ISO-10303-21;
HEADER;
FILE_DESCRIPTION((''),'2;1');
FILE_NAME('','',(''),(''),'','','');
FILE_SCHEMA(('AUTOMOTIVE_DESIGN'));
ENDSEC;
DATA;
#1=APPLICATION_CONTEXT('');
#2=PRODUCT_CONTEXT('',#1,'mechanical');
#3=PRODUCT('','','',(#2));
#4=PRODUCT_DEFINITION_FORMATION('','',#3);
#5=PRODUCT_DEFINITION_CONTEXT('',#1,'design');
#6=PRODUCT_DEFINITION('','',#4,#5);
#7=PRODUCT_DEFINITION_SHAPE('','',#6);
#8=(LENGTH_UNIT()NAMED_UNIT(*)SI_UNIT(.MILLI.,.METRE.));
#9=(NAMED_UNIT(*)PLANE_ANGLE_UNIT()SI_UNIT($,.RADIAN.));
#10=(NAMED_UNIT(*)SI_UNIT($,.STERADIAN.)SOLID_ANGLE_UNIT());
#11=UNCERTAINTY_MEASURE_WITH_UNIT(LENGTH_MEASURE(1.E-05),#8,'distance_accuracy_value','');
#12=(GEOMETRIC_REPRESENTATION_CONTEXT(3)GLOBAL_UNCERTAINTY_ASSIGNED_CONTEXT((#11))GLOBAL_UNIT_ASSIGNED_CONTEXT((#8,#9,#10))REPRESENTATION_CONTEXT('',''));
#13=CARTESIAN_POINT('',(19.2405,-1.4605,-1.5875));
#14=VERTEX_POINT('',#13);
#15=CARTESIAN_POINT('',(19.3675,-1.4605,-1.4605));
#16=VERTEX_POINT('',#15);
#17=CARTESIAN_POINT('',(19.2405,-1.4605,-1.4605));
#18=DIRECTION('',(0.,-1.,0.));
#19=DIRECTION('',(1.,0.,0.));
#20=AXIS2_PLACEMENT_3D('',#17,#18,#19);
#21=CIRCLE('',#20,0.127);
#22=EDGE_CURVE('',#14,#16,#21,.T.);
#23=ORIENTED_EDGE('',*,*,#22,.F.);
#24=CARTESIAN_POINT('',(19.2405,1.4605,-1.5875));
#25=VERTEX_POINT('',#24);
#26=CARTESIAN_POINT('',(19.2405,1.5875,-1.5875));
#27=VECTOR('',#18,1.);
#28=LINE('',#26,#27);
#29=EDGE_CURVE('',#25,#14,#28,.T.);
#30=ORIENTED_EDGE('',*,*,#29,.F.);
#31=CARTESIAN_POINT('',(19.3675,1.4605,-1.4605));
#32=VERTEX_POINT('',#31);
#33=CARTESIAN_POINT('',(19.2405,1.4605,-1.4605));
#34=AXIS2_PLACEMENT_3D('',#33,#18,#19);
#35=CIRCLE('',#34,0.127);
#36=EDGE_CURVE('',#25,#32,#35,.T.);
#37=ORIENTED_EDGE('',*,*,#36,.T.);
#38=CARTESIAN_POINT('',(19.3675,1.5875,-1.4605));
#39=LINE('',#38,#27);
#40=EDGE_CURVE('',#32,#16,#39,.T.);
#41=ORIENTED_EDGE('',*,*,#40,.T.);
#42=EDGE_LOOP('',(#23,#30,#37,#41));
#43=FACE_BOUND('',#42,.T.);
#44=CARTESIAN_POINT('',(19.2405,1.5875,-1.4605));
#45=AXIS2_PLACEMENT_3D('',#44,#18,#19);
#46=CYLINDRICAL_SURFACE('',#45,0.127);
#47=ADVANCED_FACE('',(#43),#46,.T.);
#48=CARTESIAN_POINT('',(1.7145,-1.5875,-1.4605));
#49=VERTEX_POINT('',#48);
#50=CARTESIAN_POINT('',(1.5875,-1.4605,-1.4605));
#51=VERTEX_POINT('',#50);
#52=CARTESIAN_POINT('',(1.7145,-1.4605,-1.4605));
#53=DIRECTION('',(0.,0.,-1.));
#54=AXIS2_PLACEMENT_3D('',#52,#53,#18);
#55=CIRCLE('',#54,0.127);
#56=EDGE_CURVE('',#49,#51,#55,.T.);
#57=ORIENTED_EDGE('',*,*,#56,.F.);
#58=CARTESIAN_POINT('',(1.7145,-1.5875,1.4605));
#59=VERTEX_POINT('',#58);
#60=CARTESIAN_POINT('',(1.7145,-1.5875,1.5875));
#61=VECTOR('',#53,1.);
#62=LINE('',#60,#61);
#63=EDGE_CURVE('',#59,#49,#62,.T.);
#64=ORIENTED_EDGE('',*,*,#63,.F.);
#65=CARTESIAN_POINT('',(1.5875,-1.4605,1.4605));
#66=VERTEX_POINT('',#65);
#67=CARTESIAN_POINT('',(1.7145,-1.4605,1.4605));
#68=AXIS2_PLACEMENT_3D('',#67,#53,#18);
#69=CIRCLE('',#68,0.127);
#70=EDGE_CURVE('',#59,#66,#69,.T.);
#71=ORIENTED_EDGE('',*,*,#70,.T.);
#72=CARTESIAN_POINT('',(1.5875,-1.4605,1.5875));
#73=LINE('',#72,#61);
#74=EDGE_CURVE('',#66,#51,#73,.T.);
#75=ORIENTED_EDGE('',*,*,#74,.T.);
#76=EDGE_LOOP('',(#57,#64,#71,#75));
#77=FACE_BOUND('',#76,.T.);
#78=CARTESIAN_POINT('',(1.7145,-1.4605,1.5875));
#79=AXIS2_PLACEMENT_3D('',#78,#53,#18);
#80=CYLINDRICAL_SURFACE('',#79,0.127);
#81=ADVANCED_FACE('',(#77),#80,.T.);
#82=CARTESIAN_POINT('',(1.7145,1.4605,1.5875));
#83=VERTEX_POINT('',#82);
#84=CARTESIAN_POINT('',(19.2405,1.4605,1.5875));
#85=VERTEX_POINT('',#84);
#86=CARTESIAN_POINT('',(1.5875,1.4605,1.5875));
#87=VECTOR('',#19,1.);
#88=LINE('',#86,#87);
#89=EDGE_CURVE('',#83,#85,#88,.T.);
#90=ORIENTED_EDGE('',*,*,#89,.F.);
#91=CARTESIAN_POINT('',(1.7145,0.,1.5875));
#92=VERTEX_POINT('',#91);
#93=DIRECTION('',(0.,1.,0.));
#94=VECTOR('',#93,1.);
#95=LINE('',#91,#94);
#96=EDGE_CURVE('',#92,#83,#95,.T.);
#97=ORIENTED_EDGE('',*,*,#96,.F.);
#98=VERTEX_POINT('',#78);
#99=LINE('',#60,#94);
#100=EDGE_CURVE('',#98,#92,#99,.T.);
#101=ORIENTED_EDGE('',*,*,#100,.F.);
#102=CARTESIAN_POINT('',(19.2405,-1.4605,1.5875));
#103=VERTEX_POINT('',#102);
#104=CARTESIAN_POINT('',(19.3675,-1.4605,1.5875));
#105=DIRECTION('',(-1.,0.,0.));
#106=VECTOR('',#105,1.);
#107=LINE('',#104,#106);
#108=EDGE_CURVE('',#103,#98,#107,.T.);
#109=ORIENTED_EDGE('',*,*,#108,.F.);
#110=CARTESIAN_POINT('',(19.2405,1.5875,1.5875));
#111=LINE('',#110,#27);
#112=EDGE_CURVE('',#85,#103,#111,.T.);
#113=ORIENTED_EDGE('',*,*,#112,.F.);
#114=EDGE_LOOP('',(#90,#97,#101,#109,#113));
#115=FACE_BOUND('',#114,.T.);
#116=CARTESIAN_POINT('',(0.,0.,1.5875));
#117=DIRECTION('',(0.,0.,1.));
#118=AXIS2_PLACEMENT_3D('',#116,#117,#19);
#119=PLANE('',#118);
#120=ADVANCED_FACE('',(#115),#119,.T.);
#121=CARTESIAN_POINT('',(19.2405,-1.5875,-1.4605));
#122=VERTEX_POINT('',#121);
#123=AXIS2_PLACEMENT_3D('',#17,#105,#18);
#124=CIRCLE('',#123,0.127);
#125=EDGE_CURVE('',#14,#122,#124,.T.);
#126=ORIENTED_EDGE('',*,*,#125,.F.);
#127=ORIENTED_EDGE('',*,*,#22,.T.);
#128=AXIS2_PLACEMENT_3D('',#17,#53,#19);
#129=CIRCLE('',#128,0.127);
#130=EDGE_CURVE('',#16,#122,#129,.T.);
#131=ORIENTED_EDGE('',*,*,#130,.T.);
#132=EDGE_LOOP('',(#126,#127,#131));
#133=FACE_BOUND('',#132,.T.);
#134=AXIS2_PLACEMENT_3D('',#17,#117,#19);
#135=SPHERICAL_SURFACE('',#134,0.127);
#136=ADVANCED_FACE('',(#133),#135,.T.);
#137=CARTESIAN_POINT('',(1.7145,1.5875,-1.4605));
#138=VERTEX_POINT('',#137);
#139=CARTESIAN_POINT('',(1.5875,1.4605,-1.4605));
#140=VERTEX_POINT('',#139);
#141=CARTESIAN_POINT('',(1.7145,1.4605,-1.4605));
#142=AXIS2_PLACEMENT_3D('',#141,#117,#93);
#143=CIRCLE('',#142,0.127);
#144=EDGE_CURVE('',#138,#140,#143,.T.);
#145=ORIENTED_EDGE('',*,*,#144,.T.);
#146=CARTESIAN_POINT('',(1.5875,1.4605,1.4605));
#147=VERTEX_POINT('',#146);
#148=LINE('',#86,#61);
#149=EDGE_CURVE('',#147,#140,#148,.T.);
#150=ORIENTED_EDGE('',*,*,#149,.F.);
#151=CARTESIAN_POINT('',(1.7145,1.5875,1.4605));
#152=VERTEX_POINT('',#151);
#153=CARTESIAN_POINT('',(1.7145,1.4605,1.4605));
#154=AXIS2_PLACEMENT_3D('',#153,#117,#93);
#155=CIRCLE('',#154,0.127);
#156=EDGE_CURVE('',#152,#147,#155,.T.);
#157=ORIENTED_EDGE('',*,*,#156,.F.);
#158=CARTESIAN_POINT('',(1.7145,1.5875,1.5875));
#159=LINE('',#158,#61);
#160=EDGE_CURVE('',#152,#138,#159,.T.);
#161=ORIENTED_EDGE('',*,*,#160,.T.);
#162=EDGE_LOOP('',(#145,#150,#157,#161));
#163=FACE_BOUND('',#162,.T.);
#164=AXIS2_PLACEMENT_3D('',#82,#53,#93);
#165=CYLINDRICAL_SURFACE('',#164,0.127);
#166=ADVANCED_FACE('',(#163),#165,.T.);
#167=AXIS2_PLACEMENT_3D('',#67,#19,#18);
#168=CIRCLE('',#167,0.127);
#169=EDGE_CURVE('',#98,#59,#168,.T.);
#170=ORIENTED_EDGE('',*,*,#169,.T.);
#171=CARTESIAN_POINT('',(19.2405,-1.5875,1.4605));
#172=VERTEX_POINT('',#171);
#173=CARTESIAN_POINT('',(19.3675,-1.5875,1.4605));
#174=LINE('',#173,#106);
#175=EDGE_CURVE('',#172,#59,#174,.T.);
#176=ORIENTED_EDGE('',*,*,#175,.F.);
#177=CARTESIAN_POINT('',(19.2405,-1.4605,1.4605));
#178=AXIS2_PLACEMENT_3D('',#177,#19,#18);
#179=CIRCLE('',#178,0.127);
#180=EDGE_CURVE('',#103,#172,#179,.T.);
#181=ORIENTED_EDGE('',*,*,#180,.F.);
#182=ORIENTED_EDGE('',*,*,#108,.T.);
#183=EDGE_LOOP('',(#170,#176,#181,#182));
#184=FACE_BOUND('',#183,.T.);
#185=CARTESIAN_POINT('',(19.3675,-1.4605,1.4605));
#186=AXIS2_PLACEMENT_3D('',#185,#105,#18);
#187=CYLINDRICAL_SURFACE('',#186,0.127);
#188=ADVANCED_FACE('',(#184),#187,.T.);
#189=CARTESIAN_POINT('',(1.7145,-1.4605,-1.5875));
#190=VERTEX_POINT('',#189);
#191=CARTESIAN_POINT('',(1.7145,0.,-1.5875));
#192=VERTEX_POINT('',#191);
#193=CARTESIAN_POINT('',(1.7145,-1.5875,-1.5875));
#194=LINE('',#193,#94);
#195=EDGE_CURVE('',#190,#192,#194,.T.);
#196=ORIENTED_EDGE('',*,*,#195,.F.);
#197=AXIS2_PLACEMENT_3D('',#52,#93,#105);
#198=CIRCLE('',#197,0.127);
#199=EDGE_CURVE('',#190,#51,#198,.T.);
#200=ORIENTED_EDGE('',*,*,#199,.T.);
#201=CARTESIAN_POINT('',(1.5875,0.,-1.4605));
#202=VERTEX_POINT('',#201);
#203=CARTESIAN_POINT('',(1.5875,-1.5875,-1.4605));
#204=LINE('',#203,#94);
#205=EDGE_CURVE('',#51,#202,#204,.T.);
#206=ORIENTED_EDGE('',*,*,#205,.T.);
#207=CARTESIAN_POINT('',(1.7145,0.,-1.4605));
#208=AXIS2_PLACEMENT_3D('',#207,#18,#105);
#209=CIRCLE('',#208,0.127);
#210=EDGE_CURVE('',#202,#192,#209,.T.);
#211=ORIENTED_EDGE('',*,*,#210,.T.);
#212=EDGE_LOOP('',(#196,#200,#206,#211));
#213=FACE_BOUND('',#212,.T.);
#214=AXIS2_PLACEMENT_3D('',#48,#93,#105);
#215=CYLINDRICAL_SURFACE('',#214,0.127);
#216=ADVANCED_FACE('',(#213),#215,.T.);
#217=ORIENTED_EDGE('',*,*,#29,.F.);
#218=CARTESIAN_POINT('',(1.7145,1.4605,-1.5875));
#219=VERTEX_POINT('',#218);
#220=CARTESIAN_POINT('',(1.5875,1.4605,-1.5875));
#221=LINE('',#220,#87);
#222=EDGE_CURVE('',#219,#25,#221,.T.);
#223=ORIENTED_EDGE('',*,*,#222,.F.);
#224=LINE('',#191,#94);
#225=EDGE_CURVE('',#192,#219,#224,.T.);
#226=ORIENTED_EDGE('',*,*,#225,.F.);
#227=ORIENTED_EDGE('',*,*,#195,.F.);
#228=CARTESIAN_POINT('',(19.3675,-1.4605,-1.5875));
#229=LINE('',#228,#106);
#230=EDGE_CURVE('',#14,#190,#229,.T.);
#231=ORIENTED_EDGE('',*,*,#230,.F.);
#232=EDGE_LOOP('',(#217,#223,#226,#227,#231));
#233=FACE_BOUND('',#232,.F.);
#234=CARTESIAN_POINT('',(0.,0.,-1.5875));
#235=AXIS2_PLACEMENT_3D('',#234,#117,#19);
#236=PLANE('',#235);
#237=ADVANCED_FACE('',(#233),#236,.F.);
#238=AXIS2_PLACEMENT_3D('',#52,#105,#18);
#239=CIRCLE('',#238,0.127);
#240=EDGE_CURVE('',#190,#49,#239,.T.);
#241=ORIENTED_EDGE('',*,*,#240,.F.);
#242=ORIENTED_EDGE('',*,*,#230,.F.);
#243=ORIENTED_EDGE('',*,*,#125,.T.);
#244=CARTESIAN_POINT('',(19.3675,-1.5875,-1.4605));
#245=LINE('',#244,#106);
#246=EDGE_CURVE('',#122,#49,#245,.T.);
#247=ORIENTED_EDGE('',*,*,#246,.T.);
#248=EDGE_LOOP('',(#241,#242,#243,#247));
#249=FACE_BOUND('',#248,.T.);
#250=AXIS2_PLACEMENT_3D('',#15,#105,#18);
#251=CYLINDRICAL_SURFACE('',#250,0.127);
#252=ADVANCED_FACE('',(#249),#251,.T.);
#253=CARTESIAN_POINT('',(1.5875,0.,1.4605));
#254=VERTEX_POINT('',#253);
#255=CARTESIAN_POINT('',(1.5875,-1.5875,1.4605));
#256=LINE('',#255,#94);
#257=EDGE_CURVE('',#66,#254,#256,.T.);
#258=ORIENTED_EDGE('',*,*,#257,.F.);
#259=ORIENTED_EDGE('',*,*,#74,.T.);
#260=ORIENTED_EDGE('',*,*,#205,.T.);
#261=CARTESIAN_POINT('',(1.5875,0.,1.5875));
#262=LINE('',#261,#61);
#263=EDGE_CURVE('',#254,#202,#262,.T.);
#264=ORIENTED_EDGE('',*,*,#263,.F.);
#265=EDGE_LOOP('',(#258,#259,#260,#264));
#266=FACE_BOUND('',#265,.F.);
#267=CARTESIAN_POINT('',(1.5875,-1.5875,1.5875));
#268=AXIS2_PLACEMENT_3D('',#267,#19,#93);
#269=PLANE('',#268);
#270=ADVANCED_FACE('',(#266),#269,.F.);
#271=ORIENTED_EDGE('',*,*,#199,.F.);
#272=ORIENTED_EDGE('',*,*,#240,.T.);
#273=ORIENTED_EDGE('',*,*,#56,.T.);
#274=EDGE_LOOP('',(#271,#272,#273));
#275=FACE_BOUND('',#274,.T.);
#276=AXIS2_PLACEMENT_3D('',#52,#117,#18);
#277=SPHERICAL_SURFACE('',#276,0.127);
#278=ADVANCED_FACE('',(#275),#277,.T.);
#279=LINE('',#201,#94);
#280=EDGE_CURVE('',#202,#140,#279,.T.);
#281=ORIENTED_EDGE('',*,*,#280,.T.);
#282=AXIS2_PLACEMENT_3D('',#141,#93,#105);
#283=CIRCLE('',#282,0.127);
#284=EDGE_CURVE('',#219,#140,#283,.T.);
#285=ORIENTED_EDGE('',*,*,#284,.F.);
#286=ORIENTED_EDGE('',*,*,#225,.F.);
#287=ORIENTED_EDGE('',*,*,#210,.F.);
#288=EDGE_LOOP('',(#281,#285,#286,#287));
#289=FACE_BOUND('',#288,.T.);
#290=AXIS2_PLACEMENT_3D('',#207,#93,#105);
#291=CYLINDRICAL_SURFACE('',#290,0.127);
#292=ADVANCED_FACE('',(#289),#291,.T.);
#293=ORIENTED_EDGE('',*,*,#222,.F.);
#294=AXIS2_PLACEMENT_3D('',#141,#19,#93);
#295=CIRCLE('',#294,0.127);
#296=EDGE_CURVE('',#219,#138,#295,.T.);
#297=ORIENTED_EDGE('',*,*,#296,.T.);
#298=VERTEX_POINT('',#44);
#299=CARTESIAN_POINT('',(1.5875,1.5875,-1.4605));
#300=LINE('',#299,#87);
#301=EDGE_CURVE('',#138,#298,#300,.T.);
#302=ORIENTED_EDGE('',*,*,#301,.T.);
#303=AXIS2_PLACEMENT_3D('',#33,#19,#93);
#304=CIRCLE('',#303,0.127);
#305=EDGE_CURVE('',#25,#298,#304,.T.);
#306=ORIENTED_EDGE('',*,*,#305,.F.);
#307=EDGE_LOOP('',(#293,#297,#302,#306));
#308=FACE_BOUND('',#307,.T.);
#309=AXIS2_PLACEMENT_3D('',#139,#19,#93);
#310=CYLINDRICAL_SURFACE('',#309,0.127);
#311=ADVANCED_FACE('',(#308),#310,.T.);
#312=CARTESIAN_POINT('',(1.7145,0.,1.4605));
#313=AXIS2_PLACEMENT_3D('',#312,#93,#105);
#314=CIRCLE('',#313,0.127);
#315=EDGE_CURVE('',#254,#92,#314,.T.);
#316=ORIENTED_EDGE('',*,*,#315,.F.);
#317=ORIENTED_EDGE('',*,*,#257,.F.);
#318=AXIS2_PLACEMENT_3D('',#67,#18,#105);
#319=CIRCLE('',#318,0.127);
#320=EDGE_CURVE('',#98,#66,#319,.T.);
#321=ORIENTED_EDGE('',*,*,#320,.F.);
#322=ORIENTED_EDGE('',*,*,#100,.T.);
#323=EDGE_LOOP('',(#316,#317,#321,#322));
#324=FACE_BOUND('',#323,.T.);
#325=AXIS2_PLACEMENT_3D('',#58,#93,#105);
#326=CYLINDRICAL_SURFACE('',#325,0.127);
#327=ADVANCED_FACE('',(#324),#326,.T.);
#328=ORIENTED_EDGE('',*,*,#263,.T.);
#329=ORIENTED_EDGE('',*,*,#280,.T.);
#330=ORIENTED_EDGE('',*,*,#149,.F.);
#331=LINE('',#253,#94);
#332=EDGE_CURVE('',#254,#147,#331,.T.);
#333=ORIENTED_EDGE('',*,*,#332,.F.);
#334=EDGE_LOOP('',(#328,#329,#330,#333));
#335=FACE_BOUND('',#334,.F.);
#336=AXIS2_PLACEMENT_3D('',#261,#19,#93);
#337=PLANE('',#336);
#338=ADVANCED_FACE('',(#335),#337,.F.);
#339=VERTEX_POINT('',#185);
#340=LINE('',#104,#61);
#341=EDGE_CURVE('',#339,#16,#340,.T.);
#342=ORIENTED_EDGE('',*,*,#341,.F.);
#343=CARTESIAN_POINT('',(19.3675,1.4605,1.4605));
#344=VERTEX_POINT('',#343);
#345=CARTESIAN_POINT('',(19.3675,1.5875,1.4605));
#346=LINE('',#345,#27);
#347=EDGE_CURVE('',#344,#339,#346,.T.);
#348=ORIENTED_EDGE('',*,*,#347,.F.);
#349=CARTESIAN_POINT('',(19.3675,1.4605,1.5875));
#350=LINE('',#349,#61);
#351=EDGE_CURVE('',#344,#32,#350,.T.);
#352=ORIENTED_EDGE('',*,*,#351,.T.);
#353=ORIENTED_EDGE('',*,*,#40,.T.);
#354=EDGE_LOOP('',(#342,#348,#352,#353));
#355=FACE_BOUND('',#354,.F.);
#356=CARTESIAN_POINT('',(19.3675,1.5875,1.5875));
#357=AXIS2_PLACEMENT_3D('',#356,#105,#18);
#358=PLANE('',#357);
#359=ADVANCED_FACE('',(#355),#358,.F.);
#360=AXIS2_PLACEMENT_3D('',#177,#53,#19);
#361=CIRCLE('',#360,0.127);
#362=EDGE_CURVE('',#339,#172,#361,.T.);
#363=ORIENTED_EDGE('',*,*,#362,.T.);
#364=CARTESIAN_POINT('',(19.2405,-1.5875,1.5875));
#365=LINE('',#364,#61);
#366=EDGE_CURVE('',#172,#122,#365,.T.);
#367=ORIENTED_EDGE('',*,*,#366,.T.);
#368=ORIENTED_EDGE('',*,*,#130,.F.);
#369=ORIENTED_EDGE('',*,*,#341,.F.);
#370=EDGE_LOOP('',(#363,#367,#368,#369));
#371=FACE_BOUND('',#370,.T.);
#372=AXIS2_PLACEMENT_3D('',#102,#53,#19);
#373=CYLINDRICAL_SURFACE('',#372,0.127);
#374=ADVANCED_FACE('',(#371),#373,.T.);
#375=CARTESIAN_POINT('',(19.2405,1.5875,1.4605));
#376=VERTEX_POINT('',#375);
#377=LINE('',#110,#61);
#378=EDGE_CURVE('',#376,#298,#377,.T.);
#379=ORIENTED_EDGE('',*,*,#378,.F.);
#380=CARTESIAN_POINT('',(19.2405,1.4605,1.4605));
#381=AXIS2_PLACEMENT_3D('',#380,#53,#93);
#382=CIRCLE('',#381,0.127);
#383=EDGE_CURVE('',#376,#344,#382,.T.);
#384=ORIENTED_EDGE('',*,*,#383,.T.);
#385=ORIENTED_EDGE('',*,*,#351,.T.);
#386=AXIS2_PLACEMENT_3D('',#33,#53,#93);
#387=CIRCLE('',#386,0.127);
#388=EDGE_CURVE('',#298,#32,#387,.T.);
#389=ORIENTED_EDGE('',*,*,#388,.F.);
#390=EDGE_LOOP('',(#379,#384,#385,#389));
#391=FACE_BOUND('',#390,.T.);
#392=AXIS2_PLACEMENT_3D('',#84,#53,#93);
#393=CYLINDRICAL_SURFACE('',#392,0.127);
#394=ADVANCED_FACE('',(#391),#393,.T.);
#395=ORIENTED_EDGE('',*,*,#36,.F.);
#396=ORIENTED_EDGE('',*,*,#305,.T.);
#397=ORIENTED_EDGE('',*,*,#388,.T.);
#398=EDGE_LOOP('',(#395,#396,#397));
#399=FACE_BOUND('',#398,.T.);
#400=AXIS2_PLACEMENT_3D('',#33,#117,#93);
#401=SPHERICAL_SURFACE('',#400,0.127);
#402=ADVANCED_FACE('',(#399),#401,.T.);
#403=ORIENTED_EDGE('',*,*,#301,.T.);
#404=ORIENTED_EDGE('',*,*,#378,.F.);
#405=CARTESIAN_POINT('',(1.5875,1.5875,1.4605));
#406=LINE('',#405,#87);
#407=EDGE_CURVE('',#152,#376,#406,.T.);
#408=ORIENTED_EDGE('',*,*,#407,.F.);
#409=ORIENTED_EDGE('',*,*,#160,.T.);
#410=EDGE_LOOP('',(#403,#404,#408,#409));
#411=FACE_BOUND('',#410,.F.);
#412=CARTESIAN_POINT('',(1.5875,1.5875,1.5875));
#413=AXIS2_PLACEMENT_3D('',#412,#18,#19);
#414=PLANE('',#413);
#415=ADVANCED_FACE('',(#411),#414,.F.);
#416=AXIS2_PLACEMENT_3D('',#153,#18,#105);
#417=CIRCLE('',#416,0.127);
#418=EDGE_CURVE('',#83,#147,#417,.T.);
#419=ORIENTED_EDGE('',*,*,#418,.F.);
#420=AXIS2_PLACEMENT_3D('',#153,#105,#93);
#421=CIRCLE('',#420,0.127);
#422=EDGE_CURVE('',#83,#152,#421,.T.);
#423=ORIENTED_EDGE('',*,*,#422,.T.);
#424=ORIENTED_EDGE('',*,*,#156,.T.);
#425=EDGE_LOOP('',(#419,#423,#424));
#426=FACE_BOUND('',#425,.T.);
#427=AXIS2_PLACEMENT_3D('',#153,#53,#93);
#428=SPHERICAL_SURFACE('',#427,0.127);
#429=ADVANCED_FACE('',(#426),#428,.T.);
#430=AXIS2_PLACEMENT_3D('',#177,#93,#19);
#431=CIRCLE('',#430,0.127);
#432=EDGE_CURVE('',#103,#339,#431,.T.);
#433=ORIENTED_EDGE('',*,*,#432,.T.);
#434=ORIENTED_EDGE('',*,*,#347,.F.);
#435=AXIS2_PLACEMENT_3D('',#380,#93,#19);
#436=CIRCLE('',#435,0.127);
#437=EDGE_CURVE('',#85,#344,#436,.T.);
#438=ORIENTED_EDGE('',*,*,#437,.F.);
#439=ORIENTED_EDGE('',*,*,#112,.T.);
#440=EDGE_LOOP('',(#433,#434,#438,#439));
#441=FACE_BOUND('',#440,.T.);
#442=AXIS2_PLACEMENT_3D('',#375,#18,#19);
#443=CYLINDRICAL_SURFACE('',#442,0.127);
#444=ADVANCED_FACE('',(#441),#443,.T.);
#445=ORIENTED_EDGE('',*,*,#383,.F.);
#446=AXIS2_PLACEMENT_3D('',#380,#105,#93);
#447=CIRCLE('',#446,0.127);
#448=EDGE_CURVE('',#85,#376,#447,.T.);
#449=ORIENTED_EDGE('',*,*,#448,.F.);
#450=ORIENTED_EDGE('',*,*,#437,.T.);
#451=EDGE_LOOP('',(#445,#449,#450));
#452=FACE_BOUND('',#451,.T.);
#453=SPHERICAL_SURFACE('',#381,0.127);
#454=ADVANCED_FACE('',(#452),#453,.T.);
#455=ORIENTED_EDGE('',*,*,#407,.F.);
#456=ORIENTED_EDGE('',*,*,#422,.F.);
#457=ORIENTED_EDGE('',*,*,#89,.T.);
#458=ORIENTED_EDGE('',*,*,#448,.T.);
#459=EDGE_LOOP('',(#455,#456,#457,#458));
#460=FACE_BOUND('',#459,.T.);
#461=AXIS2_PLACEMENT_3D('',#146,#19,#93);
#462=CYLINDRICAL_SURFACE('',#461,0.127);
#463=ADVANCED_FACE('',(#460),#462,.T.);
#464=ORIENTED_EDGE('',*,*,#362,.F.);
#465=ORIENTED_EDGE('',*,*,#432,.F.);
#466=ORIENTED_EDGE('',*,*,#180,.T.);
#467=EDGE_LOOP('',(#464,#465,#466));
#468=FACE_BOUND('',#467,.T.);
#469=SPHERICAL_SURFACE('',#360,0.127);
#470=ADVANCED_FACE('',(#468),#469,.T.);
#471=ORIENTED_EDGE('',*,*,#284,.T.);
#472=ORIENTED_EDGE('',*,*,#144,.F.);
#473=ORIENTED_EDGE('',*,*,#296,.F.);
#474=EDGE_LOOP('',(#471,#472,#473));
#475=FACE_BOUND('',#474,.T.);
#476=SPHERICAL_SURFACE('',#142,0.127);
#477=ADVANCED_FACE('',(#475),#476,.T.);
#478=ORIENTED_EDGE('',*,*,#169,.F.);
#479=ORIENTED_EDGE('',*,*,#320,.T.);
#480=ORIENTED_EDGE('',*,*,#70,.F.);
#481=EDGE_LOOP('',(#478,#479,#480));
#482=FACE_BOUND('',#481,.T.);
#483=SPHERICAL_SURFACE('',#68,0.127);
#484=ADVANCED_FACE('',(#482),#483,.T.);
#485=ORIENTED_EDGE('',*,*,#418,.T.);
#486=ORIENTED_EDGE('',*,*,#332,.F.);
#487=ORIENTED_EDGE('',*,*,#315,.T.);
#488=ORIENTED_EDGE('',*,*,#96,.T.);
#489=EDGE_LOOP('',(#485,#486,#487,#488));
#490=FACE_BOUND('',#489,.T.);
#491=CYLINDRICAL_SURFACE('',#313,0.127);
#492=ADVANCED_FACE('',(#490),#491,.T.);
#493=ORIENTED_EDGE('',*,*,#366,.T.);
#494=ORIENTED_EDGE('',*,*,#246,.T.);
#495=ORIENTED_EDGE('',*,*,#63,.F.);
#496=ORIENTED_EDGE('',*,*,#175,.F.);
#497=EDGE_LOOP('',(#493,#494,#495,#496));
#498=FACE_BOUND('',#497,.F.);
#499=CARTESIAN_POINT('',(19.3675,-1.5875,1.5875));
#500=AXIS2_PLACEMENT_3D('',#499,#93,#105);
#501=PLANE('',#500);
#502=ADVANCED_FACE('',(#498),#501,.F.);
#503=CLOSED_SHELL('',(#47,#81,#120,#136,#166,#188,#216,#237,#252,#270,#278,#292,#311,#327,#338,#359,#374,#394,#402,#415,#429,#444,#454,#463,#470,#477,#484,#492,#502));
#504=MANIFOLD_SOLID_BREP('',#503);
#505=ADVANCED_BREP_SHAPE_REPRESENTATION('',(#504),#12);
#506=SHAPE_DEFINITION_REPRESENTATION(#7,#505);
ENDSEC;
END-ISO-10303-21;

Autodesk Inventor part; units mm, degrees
ref_plane "YZ Plane" through (0, 0, 0) normal (1, 0, 0) x (0, 1, 0)
sketch "Sketch1" plane through (0, 0, 0) normal (0, 0, 1) x (1, 0, 0)
  line L0 (1.5875, 1.5875) -> (19.3675, 1.5875)
  line L1 (19.3675, 1.5875) -> (19.3675, -1.5875)
  line L2 (19.3675, -1.5875) -> (1.5875, -1.5875)
  line L3 (1.5875, -1.5875) -> (1.5875, 1.5875)
  arc A0 (1.5875, 1.5875) -> (1.5875, -1.5875) centre (1.5875, 0) ccw construction
  line L4 (0, 2.2225) -> (0, -2.2225) projected
  line L5 (-2.3175, 0) -> (13.905, 0) projected
  dimension "d0" = 1.5875
  dimension "d1" = 17.78
ref_plane "IDS_WORKPLANE{1}" through (0, 0, -1.5875) normal (0, 0, 1) x (1, 0, 0)
ref_plane "IDS_WORKPLANE{2}" through (0, 0, 1.5875) normal (0, 0, 1) x (1, 0, 0)
extrude "Body1" add sketch "Sketch1" against normal up to surface (3.175 mm away) from surface at 1.5875
fillet "Fillet1" radius 0.127 14 edges at (1.5875, 1.5875, 0) (19.3675, 1.5875, 0) (10.4775, 1.5875, 1.5875) (10.4775, 1.5875, -1.5875) (19.3675, -1.5875, 0) (19.3675, 0, 1.5875) (19.3675, 0, -1.5875) (1.5875, -1.5875, 0) (10.4775, -1.5875, 1.5875) (10.4775, -1.5875, -1.5875) (1.5875, -0.7937, 1.5875) (1.5875, -0.7937, -1.5875) (1.5875, 0.7937, 1.5875) (1.5875, 0.7937, -1.5875)
equation "\"d0\" = 0.5 * PB"
equation "\"d1\" = NLG"
equation "\"d2\" = -PNT"
equation "\"d3\" = PB - PNT"
equation "\"NLG\" = 17.78"
equation "\"PB\" = 3.175"
equation "\"PNT\" = 1.5875"
properties part number "am-1043" material "Steel, Mild"
